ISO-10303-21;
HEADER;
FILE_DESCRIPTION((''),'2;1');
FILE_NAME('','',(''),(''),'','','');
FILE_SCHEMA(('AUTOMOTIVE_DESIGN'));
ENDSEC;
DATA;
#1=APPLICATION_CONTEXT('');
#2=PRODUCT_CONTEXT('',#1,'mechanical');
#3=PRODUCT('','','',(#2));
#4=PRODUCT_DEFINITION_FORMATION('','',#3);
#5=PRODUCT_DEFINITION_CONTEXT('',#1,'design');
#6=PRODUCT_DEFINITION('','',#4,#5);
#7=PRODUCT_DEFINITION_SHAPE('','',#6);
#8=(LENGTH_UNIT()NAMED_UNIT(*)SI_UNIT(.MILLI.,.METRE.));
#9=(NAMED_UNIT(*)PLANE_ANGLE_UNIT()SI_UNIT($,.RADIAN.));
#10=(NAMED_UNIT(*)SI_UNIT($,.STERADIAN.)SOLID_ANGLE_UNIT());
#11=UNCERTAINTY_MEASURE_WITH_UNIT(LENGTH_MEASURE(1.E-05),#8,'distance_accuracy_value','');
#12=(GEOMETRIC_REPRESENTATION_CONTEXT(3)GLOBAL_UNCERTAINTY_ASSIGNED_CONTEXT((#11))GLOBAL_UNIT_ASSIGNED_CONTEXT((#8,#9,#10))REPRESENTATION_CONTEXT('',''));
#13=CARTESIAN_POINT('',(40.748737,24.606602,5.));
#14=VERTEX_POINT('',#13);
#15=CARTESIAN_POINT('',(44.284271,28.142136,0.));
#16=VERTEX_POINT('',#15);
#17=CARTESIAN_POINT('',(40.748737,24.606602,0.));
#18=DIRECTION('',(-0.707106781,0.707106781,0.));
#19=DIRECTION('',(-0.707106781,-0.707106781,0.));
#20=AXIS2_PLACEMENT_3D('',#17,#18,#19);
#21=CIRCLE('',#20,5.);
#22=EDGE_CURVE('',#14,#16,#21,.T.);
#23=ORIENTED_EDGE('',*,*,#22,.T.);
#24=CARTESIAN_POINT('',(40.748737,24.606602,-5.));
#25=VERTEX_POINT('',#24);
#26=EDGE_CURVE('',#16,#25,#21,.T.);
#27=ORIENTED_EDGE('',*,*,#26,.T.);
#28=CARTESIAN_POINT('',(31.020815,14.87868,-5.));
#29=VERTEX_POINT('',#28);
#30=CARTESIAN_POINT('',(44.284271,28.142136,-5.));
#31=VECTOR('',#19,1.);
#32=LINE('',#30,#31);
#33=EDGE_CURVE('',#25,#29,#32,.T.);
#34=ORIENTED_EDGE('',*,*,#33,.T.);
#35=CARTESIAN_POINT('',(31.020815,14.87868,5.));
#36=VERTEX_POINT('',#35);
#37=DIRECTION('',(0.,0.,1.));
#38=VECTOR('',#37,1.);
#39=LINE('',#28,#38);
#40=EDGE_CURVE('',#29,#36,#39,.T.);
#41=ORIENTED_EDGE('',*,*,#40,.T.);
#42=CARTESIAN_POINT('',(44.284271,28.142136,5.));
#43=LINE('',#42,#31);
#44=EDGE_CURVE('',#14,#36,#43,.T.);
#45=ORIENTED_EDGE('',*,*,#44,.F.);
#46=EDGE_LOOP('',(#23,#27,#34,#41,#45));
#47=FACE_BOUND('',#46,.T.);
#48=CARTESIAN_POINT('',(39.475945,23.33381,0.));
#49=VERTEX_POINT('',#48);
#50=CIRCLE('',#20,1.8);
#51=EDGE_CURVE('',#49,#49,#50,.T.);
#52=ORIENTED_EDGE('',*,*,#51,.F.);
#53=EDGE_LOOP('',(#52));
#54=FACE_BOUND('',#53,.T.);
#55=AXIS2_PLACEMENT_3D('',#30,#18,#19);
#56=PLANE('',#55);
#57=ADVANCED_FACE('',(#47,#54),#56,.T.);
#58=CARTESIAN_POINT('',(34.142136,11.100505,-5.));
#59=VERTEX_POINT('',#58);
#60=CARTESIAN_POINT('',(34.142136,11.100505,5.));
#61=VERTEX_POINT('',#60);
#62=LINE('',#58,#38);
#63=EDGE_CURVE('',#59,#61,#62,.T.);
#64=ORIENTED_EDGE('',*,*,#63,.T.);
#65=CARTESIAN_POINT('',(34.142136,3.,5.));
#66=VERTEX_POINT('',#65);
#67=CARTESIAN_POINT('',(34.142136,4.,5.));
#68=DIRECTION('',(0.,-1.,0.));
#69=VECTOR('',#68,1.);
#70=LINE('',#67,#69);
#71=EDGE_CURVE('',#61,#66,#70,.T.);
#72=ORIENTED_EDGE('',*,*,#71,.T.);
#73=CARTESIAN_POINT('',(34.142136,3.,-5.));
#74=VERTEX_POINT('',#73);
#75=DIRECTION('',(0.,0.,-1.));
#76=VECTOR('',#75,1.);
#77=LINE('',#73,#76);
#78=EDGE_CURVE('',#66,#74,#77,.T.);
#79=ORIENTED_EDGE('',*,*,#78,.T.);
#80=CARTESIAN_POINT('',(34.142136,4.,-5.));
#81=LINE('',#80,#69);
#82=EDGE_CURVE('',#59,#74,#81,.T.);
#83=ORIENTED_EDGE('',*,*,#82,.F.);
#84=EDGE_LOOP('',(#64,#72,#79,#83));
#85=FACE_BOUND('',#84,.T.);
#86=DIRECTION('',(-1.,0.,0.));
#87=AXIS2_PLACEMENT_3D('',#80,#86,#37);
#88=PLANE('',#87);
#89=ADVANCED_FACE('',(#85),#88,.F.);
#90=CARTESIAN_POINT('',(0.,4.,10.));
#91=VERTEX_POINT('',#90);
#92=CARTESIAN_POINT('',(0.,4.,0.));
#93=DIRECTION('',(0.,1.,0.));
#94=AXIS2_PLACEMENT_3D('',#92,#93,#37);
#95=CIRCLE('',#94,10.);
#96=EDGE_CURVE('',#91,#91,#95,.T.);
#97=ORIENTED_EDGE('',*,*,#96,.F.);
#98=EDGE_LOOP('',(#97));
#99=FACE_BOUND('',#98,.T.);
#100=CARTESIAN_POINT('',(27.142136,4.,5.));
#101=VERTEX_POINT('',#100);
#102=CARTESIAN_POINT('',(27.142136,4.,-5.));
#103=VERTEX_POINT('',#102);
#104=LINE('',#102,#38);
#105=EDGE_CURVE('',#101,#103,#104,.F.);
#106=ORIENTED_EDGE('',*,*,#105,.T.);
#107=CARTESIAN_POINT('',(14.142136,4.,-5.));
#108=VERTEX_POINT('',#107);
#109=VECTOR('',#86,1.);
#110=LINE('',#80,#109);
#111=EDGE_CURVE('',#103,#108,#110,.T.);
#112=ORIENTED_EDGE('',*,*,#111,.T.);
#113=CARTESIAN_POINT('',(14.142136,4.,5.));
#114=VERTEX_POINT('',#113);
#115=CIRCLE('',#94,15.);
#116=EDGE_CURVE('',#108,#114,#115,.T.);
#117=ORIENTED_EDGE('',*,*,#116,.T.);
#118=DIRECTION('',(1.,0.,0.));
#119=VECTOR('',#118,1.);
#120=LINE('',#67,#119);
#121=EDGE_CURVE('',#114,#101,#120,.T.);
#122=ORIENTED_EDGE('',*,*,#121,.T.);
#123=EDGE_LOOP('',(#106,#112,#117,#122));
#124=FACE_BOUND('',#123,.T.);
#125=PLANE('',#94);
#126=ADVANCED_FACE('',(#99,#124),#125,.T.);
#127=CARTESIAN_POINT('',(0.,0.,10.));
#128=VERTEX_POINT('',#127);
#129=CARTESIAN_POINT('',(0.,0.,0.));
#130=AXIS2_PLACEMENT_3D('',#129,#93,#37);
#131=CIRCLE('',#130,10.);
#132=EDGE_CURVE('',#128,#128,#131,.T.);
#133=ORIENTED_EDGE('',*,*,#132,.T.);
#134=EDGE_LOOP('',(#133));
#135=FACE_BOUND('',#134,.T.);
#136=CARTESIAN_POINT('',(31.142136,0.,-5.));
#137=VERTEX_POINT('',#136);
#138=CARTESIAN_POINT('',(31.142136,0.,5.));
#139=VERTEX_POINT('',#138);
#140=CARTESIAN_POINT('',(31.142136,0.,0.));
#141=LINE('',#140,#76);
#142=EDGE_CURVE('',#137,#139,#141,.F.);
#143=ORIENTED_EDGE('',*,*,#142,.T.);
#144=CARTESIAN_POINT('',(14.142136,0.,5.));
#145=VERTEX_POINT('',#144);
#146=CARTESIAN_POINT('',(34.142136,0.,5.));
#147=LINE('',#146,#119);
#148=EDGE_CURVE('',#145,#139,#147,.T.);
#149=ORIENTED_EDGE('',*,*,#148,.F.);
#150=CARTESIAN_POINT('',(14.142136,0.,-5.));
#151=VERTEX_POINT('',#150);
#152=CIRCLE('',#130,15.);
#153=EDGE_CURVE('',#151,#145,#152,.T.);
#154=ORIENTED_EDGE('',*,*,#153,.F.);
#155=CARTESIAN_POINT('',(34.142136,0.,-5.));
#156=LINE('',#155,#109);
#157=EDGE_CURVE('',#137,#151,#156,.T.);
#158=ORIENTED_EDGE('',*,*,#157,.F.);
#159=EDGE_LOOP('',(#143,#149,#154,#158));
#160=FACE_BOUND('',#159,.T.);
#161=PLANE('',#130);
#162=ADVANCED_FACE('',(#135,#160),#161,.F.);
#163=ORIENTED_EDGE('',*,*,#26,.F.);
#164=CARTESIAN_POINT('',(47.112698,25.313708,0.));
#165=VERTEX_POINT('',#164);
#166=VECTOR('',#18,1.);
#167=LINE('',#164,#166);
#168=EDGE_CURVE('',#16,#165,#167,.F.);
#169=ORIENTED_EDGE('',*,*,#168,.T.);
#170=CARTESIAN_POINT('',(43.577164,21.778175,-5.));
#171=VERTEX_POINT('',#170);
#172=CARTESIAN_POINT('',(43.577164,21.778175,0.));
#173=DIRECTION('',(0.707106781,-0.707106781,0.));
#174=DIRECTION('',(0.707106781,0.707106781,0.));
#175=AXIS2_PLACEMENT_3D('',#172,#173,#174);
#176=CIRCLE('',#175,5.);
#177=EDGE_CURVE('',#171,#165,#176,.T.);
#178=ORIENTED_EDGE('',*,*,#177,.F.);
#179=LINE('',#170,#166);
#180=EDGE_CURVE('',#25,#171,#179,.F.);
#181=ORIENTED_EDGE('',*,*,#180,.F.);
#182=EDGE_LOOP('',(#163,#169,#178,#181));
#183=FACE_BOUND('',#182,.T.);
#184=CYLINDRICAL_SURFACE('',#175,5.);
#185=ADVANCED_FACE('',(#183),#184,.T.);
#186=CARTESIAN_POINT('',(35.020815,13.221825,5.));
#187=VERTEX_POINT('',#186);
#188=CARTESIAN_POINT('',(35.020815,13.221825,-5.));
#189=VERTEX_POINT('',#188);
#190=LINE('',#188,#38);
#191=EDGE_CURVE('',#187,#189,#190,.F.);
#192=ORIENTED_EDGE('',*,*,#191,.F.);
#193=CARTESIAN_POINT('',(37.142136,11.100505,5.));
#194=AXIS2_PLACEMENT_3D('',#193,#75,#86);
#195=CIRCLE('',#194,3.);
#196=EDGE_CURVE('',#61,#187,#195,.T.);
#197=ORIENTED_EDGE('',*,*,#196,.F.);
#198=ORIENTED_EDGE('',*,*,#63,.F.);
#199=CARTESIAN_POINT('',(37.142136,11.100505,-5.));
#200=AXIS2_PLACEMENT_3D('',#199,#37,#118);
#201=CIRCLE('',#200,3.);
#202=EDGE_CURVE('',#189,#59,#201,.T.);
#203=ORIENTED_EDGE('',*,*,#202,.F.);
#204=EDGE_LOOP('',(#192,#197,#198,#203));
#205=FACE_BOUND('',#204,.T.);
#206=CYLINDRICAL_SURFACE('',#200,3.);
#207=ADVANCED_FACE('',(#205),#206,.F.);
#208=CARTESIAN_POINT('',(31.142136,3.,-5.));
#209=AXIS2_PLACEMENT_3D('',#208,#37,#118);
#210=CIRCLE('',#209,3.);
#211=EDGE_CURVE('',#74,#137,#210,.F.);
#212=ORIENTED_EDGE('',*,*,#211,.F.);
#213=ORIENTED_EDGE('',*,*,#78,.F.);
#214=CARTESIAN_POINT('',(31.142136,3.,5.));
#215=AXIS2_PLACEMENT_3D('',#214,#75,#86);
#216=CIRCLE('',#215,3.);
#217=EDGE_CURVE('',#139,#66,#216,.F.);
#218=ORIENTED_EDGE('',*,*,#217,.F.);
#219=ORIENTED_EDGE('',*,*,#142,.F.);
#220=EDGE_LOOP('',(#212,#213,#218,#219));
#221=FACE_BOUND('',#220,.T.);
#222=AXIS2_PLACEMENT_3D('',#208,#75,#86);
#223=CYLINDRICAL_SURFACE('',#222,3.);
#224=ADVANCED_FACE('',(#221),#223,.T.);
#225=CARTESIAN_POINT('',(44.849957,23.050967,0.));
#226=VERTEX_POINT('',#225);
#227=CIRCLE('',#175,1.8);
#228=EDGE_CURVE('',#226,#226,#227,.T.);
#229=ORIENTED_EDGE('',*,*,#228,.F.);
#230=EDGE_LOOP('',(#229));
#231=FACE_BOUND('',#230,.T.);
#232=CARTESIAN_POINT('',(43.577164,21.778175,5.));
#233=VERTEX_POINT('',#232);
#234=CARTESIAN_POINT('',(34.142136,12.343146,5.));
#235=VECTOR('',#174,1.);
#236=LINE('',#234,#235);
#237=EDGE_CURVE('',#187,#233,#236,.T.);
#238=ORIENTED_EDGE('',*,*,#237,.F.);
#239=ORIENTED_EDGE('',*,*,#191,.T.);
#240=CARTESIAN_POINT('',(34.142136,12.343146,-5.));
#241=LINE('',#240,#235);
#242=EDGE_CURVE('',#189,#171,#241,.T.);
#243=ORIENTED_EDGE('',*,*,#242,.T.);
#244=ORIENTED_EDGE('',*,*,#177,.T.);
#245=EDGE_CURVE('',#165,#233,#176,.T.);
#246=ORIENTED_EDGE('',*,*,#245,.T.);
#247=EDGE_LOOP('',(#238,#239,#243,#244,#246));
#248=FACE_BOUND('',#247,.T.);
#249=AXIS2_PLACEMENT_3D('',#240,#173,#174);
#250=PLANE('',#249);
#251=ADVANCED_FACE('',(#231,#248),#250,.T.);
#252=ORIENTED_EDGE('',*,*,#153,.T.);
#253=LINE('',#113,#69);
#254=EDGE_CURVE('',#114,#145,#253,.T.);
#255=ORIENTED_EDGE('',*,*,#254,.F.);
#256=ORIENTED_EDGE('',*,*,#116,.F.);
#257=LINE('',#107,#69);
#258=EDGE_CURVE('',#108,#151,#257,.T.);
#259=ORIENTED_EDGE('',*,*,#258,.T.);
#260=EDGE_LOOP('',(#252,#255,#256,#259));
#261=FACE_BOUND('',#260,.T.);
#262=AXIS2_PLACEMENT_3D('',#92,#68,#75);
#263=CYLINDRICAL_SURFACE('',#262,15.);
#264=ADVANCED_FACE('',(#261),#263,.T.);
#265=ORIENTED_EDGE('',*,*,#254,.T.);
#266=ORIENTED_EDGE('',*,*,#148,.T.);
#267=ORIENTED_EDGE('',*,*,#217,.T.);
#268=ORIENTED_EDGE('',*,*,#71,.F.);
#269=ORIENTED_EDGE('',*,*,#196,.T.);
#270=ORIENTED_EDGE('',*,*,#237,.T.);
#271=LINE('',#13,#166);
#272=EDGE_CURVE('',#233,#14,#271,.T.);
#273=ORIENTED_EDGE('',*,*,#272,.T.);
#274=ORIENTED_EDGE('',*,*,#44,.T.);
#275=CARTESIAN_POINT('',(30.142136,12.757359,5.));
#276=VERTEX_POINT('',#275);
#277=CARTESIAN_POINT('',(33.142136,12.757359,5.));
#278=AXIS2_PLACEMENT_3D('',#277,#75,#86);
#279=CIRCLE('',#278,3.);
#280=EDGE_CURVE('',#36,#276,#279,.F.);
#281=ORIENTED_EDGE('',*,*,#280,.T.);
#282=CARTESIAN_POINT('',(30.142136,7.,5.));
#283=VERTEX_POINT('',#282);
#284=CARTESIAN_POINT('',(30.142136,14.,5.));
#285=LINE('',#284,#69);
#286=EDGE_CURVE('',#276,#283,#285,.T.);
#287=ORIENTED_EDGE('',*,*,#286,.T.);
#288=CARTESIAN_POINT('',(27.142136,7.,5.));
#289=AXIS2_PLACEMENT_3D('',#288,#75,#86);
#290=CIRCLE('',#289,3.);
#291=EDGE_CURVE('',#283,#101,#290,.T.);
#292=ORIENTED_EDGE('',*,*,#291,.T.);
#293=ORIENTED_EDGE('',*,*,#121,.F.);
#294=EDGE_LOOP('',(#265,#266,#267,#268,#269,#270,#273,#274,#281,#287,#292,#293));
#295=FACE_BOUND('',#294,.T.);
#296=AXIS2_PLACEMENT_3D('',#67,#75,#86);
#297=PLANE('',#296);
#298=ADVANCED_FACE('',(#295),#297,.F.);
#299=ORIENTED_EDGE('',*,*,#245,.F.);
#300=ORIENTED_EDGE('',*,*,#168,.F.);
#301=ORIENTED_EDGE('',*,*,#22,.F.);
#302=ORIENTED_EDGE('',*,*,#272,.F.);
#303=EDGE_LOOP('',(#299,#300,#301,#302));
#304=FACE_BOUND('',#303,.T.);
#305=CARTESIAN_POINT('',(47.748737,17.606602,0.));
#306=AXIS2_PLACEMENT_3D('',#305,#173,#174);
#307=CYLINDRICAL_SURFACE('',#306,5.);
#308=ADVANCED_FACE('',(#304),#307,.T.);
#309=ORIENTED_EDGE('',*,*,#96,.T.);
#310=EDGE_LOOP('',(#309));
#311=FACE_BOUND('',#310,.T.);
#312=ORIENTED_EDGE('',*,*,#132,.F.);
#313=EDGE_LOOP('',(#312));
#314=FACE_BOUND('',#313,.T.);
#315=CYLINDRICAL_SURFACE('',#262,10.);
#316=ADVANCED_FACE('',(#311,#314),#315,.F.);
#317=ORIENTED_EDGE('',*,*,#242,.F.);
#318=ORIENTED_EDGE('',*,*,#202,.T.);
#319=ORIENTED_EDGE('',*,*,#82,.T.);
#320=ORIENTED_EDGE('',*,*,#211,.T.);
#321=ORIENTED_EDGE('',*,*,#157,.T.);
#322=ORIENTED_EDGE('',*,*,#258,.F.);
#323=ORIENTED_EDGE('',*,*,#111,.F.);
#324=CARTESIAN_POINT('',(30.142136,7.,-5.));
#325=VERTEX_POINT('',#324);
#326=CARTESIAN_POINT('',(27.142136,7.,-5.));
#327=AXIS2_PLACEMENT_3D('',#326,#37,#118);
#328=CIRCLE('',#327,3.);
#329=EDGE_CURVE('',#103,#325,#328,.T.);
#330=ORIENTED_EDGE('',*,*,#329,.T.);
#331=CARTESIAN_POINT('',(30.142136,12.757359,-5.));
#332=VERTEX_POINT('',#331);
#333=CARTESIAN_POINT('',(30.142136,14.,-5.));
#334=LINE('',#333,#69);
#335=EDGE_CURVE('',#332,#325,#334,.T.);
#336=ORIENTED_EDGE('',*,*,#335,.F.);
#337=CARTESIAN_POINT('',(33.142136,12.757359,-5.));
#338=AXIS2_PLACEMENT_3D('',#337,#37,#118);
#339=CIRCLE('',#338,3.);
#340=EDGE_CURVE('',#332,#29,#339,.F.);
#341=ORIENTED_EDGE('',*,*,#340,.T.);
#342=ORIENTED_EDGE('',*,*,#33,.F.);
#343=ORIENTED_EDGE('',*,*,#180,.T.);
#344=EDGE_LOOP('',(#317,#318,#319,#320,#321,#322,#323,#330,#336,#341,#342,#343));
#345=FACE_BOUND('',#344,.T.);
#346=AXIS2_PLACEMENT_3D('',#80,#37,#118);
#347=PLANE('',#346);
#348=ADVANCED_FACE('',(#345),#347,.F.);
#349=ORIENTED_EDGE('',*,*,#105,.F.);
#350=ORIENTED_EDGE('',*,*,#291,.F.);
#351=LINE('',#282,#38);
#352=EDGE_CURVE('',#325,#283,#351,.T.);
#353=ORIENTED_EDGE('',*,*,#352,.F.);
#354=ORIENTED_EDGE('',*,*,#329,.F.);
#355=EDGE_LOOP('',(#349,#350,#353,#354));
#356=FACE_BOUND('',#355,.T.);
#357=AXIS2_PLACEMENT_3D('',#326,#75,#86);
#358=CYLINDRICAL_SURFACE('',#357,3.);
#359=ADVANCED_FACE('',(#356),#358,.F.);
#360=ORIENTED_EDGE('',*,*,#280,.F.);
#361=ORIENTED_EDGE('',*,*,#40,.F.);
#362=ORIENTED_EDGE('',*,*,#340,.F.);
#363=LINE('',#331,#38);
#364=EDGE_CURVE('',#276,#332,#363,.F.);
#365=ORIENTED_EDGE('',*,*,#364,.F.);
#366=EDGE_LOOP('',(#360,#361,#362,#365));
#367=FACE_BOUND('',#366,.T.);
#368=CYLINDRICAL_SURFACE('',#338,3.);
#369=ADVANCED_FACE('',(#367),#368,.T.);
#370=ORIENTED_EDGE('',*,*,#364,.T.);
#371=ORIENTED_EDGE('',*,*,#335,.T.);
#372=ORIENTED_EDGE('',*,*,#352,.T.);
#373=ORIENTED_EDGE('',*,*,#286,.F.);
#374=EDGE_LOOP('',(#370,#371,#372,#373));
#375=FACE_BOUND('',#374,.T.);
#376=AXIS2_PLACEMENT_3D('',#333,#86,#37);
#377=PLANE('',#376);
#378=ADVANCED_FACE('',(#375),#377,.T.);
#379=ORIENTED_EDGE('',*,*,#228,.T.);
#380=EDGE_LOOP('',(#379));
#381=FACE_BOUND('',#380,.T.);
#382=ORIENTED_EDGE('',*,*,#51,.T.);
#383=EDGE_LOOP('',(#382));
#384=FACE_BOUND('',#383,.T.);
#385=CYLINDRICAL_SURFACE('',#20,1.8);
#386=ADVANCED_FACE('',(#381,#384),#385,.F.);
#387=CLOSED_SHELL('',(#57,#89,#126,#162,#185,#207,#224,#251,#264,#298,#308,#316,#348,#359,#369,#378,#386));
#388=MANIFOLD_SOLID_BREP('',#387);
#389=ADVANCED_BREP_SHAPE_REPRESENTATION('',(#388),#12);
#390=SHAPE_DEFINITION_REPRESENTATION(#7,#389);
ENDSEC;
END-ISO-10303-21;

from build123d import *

# Parameters (mm, degrees)
SKETCH2_R            = 10
BOSS_EXTRUDE1_DEPTH  = 4
BOSS_EXTRUDE2_DEPTH  = 10
FILLET1_R            = 5
M3_CLEARANCE_HOLE1_D = 3.6
FILLET2_R            = 3


with BuildPart() as part:
    # Sketch2 → Boss-Extrude1 (new body)
    with BuildSketch(Plane(origin=(0, 0, 0), x_dir=(1, 0, 0), z_dir=(0, 1, 0))):
        with BuildLine():
            Line((34.142135624, 5), (34.142135624, -5))
            Line((34.142135624, -5), (14.142135624, -5))
            ThreePointArc((14.142135624, -5), (-15, 0), (14.142135624, 5))
            Line((14.142135624, 5), (34.142135624, 5))
        make_face()
        with Locations(Location((0, 0, 0), (0, 0, 270))):
            Circle(SKETCH2_R, mode=Mode.SUBTRACT)
    extrude(amount=BOSS_EXTRUDE1_DEPTH)

    # Sketch3 → Boss-Extrude2 (add)
    with BuildSketch(Plane.XY.offset(5)):
        Polygon((34.142135624, 4), (34.142135624, 12.343145751), (47.112698372, 25.313708499), (44.284271247, 28.142135624), (30.142135624, 14), (30.142135624, 4), align=None)
    extrude(amount=-BOSS_EXTRUDE2_DEPTH)

    # Fillet1
    fillet1_edges = [part.edges().sort_by_distance(p)[0] for p in [
        (45.69848481, 26.727922061, 5),
        (45.69848481, 26.727922061, -5),
    ]]
    fillet(fillet1_edges, radius=FILLET1_R - 0.0001)  # a hair under: the kernel refuses the full size

    # M3 Clearance Hole1 (through all)
    with Locations(Plane(origin=(8.071067812, -8.071067812, 0), x_dir=(0.7071067811865486, 0.7071067811865465, 0), z_dir=(-0.7071067811865465, 0.7071067811865486, 0))):
        with Locations((46.213203436, 0)):
            Hole(M3_CLEARANCE_HOLE1_D / 2)

    # Fillet2
    fillet2_edges = [part.edges().sort_by_distance(p)[0] for p in [
        (30.142135624, 4, 0),
        (30.142135624, 14, 0),
        (34.142135624, 12.343145751, 0),
        (34.142135624, 0, 0),
    ]]
    fillet(fillet2_edges, radius=FILLET2_R)


solid = part.part
